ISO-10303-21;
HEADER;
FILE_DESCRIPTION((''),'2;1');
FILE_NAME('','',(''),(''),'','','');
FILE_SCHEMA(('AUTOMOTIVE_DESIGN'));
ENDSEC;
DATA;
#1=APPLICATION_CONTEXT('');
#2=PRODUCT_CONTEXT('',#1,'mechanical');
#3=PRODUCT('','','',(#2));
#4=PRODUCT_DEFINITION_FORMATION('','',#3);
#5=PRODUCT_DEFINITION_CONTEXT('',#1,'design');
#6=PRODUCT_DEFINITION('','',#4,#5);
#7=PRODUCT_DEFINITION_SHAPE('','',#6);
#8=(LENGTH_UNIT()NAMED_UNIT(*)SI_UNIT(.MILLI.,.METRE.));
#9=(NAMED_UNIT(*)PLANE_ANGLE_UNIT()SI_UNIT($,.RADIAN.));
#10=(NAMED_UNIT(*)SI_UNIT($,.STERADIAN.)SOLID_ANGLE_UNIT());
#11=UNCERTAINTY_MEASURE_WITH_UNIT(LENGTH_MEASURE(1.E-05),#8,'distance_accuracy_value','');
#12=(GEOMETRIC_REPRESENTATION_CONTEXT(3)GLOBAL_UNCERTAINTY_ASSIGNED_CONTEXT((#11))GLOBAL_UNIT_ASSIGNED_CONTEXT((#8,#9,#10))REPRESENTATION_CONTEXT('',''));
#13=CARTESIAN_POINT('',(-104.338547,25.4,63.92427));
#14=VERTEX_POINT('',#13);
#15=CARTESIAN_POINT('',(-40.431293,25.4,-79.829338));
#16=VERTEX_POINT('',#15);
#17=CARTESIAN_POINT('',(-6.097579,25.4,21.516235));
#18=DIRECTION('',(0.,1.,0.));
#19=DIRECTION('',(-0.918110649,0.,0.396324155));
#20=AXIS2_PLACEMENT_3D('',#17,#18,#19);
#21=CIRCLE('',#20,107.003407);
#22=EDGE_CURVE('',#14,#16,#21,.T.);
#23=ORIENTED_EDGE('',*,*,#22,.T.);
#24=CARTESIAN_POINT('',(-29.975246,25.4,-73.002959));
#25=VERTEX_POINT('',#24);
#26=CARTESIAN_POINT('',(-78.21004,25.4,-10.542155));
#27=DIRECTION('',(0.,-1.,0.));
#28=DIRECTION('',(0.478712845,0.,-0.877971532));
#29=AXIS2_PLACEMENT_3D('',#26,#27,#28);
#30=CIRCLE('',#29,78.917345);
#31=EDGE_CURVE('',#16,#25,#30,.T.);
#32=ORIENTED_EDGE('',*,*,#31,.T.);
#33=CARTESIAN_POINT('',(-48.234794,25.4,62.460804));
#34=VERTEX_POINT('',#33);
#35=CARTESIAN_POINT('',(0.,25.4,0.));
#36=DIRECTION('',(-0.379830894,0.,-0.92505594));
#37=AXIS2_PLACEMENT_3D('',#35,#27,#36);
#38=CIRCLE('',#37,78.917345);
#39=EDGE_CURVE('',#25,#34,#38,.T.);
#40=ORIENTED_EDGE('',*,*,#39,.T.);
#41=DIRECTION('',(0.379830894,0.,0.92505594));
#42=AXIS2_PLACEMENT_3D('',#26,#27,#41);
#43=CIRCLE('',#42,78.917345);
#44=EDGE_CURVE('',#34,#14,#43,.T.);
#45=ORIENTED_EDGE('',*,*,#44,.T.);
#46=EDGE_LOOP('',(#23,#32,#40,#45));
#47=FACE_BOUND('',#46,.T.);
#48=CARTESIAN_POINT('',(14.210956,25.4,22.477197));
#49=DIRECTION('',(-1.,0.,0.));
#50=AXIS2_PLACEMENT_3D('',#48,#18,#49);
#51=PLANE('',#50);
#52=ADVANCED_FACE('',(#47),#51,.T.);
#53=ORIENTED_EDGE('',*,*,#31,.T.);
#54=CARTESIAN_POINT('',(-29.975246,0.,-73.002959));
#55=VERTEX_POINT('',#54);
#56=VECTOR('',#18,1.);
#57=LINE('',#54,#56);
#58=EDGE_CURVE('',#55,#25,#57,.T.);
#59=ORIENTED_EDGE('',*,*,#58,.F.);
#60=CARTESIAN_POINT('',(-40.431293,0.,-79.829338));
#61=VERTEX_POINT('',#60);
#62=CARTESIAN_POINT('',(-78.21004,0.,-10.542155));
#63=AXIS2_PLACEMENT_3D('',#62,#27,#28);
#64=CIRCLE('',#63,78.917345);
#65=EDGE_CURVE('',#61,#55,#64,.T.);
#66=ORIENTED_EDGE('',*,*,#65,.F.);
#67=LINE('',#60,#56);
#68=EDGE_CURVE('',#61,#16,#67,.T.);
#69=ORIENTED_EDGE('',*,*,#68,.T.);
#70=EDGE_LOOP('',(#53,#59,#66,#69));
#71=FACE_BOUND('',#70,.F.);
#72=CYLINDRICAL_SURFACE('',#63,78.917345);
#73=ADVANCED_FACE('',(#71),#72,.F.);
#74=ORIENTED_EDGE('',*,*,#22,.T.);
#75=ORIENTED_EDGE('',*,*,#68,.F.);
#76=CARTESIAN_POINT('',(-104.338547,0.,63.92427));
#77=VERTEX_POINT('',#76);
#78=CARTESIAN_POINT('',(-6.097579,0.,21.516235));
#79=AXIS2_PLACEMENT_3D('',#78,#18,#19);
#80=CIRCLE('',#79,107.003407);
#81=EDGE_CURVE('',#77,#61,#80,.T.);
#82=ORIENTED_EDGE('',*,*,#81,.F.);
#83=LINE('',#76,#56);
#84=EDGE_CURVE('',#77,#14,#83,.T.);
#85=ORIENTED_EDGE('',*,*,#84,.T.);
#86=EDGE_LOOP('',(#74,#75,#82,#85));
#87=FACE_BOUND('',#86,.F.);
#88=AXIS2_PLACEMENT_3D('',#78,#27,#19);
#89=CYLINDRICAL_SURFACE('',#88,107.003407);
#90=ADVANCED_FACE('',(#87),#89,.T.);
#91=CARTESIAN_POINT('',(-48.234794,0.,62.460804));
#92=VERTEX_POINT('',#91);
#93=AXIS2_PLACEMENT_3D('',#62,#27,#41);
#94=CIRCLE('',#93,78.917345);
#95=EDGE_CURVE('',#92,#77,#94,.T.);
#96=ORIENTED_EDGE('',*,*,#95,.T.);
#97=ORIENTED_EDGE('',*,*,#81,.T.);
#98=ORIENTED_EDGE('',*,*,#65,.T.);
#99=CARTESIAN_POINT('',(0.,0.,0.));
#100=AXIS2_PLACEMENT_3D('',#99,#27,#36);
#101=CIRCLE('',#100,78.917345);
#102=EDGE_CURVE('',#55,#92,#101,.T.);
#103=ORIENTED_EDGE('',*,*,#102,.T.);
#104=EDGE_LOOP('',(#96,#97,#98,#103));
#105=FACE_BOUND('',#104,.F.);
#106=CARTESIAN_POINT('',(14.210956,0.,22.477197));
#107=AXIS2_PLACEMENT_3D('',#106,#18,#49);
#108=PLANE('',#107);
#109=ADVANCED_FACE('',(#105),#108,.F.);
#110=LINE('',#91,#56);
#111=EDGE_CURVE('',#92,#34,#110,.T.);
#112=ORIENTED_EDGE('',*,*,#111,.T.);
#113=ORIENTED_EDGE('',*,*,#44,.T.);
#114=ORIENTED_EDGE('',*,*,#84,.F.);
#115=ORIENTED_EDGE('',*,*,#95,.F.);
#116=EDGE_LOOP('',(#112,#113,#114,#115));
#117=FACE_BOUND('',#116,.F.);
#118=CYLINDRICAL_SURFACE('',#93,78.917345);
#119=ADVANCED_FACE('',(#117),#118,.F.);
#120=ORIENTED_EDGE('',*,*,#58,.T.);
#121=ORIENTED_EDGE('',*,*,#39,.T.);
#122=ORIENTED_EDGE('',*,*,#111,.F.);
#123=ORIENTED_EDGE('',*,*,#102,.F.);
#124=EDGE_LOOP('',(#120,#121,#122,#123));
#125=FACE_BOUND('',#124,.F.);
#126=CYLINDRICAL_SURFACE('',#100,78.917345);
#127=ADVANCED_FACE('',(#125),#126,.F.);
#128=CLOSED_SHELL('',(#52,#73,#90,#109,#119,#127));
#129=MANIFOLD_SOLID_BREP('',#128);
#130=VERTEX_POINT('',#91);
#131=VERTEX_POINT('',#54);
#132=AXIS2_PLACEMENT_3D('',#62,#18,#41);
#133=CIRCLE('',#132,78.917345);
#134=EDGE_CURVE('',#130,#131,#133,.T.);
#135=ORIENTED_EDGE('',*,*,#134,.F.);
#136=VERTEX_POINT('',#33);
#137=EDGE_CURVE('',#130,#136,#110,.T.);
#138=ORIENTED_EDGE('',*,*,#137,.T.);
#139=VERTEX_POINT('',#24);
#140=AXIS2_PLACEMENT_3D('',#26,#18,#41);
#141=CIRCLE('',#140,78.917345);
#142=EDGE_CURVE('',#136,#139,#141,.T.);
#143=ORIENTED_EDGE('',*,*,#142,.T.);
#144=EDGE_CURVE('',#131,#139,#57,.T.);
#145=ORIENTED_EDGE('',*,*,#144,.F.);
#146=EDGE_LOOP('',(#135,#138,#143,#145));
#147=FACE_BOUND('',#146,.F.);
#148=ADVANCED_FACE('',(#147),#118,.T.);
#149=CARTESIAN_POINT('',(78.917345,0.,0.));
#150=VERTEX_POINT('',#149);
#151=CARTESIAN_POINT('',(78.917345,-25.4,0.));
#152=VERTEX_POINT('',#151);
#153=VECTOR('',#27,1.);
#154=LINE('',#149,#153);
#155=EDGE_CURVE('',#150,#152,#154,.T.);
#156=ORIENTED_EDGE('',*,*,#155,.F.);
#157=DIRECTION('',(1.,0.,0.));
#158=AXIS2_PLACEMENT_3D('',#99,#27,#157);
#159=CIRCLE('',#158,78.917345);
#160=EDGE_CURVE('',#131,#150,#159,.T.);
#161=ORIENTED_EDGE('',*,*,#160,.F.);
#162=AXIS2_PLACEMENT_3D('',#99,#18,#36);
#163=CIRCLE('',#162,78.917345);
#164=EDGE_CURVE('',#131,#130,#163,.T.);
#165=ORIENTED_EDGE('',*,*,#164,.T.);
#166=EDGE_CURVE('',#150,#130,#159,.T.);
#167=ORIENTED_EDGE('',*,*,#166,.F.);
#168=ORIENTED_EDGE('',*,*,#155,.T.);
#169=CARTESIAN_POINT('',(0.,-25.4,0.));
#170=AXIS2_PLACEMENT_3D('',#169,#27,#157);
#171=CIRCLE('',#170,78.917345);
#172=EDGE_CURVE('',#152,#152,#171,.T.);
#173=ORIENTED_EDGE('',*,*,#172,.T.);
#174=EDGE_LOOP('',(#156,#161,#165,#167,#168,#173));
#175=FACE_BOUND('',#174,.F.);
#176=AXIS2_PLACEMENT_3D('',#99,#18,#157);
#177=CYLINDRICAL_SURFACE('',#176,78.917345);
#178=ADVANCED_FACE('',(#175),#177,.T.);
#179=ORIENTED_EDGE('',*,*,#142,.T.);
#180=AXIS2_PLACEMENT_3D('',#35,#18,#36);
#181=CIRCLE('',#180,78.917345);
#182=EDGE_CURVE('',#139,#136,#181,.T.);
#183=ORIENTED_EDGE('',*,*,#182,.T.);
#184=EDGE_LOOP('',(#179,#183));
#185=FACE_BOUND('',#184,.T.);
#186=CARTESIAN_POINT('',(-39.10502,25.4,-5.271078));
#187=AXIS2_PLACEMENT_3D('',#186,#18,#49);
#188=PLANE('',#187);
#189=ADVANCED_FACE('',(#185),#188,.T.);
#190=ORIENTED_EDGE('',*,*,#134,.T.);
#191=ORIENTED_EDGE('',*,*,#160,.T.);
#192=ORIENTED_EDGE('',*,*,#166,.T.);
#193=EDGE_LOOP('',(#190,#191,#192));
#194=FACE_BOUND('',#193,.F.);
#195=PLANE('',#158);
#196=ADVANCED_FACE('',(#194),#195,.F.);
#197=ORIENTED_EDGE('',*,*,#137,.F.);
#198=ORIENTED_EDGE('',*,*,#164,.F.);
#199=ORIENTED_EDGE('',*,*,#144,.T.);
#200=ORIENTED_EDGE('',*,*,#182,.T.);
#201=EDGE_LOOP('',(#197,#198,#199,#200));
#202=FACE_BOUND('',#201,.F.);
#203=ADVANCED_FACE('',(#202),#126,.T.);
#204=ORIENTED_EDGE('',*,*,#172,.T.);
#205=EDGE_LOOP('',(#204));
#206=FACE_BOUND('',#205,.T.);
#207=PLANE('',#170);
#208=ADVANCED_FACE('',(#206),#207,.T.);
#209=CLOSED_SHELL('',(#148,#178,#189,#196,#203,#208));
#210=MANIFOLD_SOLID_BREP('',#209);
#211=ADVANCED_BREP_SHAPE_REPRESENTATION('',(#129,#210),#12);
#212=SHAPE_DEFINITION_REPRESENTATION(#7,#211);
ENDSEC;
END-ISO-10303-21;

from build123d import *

# Parameters (mm, degrees)
F0_R     = 78.9173451656
F1_DEPTH = 25.4
F3_DEPTH = 25.4


# Not quite as in the source:
# - after a boolean that leaves OpenCascade's solid faulty, fix() repairs it


with BuildPart() as f1:
    # F0 (on Front) → F1 (new body)
    with BuildSketch(Plane.XZ):
        Circle(F0_R)
    extrude(amount=F1_DEPTH)

    # F2 (on face) → F3 (join)
    with BuildSketch(Plane(origin=(0, 0, 0), x_dir=(-1, 0, 0), z_dir=(0, 1, 0))):
        with BuildLine():
            ThreePointArc((78.9173451656, 0), (70.8325817016, 34.7950102381), (48.2347940755, 62.460803777))
            ThreePointArc((48.2347940755, 62.460803777), (0, 0), (29.975245774, -73.0029589042))
            ThreePointArc((29.975245774, -73.0029589042), (65.5496536419, -43.9453100502), (78.9173451656, 0))
        make_face()
    extrude(amount=F3_DEPTH)

    add(f1.part.fix(), mode=Mode.REPLACE)


with BuildPart() as f3:
    # F2 (on face) → F3, piece 2 (new body)
    with BuildSketch(Plane(origin=(0, 0, 0), x_dir=(-1, 0, 0), z_dir=(0, 1, 0))):
        with BuildLine():
            ThreePointArc((48.2347940755, 62.460803777), (76.1521808182, 68.348354975), (104.3385465947, 63.924270215))
            ThreePointArc((104.3385465947, 63.924270215), (-91.6791379898, 64.9839546859), (40.4312930076, -79.8293376001))
            ThreePointArc((40.4312930076, -79.8293376001), (35.0680398169, -76.6232810344), (29.975245774, -73.0029589042))
            ThreePointArc((29.975245774, -73.0029589042), (-78.2100398495, 10.5421551272), (48.2347940755, 62.460803777))
        make_face()
    extrude(amount=F3_DEPTH)


solid = Compound([f1.part, f3.part])
